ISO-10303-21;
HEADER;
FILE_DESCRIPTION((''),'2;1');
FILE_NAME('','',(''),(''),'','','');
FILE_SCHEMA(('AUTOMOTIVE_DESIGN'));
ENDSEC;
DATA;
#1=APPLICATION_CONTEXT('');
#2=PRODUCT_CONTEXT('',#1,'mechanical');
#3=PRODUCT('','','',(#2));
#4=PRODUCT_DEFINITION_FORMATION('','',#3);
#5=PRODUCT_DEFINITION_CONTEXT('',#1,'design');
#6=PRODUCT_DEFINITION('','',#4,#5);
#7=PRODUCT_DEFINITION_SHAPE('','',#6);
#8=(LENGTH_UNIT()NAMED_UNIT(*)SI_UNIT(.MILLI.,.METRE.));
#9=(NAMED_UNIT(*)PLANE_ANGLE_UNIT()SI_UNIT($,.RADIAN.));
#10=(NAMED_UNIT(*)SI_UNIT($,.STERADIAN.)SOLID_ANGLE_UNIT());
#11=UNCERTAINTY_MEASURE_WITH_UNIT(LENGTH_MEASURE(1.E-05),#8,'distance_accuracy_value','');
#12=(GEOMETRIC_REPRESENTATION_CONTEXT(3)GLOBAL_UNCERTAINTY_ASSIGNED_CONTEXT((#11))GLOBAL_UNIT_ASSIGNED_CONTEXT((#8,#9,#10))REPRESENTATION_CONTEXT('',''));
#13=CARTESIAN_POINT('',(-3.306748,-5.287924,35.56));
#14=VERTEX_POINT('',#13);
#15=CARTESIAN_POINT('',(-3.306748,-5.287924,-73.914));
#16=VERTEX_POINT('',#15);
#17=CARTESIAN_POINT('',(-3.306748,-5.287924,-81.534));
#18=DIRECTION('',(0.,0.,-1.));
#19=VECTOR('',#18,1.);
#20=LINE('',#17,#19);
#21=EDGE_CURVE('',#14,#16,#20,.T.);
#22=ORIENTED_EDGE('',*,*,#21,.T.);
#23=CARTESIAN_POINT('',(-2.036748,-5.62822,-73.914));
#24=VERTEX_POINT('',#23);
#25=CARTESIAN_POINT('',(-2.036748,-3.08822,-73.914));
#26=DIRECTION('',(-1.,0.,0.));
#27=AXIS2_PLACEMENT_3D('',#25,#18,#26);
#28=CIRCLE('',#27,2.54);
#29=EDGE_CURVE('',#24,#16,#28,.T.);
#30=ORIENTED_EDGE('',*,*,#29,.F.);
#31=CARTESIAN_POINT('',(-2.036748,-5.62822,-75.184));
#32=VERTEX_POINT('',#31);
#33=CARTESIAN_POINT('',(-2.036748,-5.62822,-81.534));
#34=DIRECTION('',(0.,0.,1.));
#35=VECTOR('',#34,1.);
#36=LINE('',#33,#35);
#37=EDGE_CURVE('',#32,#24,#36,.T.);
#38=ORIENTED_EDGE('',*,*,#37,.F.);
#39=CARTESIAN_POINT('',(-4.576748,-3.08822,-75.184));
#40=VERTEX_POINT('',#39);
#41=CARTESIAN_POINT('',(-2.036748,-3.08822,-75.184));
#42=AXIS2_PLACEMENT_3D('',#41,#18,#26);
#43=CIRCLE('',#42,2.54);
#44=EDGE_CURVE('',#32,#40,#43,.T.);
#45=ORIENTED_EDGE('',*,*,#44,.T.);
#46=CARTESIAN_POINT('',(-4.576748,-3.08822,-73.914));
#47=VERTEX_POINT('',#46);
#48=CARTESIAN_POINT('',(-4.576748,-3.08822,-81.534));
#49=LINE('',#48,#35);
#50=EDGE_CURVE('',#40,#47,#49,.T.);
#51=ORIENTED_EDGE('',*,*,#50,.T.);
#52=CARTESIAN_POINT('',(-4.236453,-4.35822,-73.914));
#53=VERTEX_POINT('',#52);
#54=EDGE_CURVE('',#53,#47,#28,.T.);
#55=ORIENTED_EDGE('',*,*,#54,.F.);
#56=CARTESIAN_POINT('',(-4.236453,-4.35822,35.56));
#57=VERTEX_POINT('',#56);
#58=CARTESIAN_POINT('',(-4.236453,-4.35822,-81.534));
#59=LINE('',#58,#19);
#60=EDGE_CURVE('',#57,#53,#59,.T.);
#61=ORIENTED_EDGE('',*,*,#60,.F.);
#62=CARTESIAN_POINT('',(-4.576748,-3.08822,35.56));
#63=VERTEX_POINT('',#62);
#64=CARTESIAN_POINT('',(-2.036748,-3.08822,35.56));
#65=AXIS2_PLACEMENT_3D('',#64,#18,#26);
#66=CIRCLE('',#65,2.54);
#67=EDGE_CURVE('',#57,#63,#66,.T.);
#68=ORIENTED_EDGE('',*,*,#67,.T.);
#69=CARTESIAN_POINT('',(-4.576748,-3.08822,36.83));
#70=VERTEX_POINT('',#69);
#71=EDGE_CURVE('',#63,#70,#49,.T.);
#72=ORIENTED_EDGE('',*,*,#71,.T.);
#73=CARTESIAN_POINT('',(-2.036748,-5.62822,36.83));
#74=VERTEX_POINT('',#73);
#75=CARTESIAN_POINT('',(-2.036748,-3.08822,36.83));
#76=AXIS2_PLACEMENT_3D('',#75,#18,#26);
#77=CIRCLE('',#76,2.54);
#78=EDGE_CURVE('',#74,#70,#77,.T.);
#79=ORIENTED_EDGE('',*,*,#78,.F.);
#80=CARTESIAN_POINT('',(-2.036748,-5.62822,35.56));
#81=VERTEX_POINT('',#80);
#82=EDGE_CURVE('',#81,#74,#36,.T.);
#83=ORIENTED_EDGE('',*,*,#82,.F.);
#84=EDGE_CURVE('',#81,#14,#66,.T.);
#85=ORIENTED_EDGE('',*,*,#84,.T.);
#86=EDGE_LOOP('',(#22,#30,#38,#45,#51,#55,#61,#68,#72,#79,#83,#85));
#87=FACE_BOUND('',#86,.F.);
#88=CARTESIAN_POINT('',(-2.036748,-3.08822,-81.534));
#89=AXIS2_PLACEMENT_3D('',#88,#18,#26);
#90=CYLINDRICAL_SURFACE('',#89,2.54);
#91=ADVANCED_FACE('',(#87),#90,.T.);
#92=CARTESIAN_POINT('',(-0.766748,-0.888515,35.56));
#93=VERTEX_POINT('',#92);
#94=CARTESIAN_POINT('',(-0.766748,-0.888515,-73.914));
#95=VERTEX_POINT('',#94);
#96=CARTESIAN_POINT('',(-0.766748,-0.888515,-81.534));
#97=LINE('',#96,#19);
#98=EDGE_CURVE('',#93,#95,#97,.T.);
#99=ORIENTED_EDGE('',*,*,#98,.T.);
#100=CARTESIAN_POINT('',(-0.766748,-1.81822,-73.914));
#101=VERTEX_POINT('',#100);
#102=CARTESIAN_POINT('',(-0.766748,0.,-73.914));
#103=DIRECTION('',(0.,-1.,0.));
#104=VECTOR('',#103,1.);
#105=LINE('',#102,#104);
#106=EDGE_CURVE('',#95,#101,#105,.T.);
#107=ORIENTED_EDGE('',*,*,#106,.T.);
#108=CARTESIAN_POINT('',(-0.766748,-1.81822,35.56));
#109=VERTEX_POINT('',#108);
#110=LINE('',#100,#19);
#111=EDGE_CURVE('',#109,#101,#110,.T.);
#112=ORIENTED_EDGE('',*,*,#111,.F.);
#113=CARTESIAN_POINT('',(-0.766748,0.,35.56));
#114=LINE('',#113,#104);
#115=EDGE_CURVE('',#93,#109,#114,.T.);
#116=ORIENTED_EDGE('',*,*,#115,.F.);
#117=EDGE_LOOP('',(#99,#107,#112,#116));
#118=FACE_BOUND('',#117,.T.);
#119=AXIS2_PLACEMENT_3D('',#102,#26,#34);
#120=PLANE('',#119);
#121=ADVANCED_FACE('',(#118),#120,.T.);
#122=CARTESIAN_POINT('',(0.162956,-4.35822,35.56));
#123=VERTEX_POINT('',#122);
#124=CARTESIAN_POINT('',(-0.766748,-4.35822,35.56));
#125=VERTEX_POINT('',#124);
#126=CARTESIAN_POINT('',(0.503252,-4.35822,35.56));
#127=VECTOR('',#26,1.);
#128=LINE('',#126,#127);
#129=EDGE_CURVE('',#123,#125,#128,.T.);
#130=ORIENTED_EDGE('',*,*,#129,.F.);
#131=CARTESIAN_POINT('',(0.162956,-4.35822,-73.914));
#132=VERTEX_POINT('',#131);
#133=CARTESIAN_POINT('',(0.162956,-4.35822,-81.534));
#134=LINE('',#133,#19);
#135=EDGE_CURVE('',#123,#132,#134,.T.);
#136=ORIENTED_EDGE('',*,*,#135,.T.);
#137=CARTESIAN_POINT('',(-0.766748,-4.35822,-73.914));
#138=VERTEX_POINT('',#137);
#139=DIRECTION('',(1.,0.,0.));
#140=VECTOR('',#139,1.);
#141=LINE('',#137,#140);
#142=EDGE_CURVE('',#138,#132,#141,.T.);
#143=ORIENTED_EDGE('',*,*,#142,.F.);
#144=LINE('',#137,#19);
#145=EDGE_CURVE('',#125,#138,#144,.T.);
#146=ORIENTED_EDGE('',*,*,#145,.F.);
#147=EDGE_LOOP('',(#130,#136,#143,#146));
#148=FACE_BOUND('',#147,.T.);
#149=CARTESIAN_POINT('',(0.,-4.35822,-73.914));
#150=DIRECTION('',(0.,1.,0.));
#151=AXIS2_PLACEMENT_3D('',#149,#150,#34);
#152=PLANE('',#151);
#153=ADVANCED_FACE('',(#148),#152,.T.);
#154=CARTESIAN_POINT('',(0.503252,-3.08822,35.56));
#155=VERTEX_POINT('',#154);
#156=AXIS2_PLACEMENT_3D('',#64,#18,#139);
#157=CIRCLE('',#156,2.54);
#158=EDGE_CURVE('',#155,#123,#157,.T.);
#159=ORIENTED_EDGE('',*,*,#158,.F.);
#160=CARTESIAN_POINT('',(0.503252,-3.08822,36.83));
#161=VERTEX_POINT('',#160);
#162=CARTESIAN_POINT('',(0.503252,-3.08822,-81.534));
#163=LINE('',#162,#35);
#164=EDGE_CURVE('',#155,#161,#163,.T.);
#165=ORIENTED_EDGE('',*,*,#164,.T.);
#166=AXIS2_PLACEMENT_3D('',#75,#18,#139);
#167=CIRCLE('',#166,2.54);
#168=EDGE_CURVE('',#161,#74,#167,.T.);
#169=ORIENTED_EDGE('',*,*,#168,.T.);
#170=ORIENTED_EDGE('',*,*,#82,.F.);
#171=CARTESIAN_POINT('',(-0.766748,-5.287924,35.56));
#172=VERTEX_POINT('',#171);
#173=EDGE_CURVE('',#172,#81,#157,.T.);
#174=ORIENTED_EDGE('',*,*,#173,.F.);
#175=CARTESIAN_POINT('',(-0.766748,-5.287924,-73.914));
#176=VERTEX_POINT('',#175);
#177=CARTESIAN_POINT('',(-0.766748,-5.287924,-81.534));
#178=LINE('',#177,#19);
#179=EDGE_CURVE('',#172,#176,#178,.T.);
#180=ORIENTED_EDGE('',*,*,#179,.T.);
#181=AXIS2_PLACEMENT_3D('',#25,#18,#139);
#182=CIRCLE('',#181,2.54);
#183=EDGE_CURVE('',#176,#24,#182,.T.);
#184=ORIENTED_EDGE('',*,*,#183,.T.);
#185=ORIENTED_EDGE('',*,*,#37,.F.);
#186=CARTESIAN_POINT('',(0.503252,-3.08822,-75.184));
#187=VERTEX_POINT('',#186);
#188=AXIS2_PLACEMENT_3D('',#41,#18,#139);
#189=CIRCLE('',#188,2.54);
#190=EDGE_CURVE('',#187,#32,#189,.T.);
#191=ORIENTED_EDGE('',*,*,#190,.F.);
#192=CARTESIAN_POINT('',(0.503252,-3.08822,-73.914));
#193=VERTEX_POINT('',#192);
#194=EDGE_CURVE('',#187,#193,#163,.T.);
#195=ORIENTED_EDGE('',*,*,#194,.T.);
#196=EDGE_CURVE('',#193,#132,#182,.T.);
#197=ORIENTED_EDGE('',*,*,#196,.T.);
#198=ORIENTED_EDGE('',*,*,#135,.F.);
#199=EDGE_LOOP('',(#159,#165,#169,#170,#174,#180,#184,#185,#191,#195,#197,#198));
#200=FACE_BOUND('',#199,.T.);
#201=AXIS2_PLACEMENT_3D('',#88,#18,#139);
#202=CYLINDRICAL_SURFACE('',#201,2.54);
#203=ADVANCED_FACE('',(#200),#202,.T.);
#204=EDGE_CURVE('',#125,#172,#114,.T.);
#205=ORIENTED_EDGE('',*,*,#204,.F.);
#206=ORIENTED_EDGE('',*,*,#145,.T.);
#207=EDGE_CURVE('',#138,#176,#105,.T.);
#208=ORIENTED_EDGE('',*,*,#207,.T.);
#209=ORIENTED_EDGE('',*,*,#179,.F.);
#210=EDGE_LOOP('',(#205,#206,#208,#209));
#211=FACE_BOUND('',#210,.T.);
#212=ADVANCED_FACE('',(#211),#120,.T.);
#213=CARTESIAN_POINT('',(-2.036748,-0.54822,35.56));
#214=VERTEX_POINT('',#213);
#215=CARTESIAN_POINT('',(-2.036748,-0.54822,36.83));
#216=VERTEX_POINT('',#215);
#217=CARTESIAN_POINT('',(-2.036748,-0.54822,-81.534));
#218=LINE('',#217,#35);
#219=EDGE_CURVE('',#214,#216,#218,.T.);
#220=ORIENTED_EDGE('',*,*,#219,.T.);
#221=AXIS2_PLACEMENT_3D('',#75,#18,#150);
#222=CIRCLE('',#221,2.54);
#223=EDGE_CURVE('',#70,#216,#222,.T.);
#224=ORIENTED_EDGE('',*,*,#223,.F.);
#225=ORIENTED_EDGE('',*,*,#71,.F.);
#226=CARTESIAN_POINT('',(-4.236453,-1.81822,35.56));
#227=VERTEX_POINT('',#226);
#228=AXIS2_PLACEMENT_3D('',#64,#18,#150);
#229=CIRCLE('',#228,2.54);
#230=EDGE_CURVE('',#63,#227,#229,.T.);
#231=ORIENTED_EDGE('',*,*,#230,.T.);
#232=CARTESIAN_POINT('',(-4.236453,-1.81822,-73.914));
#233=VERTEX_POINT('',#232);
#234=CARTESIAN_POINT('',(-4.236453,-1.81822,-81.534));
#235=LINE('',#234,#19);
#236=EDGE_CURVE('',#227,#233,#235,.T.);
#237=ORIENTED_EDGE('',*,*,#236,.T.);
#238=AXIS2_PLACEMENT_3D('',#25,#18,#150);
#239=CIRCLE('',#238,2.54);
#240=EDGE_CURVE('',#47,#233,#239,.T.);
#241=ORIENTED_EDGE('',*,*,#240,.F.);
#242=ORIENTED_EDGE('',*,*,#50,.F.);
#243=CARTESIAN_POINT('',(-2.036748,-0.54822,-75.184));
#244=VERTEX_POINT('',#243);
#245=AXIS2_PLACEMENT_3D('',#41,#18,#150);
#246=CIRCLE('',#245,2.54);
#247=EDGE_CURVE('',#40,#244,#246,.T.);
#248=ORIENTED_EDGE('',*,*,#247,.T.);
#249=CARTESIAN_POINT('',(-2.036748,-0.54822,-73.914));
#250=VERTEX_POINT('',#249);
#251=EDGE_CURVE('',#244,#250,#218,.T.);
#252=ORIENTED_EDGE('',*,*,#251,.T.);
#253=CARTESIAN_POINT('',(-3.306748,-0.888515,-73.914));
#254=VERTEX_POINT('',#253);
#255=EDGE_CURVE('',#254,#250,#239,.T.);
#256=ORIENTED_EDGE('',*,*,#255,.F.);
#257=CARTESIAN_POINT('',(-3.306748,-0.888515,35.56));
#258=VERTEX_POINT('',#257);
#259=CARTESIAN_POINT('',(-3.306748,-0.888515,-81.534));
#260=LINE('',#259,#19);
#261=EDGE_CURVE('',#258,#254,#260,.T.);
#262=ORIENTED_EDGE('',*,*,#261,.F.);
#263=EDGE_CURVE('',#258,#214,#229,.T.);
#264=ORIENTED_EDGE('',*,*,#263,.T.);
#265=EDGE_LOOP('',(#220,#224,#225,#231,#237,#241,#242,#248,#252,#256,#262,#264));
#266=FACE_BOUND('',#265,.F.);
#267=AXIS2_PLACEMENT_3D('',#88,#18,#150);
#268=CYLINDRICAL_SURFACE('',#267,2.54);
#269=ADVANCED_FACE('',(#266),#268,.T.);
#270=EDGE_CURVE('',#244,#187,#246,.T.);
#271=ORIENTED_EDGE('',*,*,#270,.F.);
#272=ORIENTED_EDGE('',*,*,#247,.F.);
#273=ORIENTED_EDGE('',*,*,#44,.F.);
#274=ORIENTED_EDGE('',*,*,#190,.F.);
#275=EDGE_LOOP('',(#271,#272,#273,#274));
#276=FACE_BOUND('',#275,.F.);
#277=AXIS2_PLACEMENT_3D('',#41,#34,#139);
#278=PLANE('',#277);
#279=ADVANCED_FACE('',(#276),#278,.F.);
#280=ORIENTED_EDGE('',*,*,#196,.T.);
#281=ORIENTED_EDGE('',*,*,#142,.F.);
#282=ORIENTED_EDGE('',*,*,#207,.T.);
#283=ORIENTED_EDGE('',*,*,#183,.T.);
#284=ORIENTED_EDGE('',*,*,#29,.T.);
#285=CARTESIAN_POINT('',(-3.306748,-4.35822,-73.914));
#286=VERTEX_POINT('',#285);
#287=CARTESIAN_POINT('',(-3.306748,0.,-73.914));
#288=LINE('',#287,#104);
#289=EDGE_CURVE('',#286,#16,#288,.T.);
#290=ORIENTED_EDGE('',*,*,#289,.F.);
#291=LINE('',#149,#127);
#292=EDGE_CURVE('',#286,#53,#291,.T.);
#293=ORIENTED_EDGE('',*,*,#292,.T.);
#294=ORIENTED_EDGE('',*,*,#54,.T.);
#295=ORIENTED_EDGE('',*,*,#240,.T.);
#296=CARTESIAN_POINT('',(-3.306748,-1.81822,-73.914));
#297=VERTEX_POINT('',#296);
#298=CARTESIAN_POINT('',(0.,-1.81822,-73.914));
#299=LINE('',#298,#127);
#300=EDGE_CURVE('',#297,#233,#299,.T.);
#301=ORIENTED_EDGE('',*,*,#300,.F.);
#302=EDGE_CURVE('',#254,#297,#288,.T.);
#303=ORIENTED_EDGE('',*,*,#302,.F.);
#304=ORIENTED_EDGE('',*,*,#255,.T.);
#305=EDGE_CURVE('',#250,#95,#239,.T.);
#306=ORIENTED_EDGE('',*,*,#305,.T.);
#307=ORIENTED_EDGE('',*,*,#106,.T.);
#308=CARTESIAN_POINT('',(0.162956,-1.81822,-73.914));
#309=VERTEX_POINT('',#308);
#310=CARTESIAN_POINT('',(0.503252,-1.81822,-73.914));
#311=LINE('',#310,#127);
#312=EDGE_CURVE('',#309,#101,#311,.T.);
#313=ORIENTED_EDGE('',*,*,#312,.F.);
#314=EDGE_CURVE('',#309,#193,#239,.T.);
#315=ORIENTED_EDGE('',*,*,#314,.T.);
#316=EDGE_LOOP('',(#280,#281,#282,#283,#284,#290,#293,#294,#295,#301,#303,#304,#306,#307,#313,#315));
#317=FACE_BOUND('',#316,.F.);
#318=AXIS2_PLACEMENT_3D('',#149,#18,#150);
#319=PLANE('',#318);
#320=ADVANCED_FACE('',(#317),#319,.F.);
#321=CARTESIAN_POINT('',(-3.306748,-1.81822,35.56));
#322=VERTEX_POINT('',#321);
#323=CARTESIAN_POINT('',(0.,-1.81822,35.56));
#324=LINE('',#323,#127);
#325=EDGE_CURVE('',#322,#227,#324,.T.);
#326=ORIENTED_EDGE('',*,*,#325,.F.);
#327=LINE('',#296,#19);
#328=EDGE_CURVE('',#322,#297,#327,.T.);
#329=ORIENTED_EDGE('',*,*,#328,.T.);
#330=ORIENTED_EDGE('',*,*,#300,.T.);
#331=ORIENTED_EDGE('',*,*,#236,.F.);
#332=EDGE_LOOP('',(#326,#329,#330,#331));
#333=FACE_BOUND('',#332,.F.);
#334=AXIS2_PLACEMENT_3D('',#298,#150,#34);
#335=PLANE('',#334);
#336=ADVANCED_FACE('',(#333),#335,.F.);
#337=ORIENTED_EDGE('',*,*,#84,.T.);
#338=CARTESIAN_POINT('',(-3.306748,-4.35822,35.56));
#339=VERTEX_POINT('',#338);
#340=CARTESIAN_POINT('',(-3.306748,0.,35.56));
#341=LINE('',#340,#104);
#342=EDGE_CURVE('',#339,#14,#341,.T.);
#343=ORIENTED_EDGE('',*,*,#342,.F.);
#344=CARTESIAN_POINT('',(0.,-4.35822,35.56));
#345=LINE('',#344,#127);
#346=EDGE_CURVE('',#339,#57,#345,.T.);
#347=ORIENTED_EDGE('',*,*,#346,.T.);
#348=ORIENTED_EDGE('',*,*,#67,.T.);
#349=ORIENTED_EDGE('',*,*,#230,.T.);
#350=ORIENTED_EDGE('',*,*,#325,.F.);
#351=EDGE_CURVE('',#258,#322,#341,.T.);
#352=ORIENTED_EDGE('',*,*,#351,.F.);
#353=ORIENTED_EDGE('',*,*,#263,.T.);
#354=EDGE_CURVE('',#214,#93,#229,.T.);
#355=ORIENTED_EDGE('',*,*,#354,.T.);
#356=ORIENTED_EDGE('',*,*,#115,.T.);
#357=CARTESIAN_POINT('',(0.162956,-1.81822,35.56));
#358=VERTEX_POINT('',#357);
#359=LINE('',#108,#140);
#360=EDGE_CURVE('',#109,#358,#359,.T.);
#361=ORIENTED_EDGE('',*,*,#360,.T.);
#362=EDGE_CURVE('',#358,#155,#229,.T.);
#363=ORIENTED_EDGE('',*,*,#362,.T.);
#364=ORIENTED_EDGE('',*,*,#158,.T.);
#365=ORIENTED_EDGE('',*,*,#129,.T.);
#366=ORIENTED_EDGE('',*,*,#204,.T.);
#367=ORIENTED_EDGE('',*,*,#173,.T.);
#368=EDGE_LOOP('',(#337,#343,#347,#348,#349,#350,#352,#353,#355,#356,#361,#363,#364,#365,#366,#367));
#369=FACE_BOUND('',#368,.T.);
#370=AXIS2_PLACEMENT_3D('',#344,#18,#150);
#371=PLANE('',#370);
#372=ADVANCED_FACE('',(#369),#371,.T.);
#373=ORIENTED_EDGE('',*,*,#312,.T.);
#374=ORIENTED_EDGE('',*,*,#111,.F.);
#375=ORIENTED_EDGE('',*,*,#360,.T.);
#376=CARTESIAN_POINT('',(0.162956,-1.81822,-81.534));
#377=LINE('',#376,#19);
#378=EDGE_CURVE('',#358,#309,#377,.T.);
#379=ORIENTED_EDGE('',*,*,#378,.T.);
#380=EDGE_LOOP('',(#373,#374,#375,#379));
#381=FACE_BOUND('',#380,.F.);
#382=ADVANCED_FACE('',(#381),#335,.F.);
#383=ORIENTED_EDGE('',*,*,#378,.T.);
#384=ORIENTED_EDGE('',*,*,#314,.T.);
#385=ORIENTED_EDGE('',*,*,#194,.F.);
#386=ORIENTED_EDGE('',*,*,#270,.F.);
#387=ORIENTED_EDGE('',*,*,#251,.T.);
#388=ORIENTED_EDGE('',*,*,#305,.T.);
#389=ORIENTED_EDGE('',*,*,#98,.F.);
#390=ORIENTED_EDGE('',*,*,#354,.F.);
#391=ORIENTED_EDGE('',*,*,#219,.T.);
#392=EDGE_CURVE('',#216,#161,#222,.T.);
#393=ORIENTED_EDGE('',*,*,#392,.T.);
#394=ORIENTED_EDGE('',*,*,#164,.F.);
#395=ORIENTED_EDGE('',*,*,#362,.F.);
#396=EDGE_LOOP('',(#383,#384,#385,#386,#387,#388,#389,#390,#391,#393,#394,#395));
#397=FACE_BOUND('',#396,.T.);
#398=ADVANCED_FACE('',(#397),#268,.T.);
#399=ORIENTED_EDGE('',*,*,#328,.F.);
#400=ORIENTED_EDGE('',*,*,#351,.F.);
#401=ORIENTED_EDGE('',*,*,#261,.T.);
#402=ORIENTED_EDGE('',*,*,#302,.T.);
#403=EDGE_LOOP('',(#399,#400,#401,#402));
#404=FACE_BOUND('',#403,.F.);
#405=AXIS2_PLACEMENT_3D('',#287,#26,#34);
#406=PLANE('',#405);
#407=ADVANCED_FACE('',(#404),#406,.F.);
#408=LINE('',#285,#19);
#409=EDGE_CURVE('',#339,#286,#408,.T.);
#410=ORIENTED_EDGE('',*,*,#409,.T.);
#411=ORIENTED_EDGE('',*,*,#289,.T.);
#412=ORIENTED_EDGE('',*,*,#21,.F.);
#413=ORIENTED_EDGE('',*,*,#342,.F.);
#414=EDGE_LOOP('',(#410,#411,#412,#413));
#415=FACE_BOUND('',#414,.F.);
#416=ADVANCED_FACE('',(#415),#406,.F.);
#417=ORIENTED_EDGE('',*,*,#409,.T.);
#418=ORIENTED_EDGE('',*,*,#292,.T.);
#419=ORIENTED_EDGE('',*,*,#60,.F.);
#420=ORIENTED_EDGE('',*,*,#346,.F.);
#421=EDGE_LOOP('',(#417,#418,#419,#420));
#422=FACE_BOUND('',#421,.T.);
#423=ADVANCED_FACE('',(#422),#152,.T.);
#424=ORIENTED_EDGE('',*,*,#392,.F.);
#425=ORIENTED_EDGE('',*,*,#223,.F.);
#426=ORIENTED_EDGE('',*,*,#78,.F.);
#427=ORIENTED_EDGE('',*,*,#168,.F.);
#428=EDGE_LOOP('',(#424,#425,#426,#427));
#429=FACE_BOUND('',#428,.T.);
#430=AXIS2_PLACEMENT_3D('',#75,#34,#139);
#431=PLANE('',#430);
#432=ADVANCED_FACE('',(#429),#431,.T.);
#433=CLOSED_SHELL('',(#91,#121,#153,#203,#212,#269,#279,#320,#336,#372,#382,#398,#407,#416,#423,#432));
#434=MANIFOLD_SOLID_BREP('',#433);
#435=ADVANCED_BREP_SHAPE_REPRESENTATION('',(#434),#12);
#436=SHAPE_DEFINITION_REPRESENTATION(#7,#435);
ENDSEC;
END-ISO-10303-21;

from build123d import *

# Parameters (mm, degrees)
F0_W          = 5.08
F0_H          = 5.08
F1_DEPTH      = 36.83
F1_DEPTH_BACK = 75.184
F2_W          = 2.54
F2_H          = 109.474
F3_DEPTH      = 23.114
F4_W          = 2.54
F4_H          = 109.474
F5_DEPTH      = 4.5777483376
F5_DEPTH_BACK = 29.972
F6_T1_DEPTH   = 124.714


# Not quite as in the source:
# - a fillet or chamfer that OpenCascade refuses, or shapes differently, is made with other operations: its cross-section is extruded or revolved along the edge and cut away or added


with BuildPart() as f1:
    # F0 (on Top) → F1 (new body, two sides)
    with BuildSketch(Plane.XY) as f1_sk:
        with Locations((-2.0367483376, -3.0882195887)):
            Rectangle(F0_W, F0_H)
    extrude(amount=F1_DEPTH)
    extrude(f1_sk.sketch, amount=-F1_DEPTH_BACK)

    # F2 (on Front) → F3 (cut)
    with BuildSketch(Plane.XZ):
        with Locations((-2.0367483376, -19.177)):
            Rectangle(F2_W, F2_H)
    extrude(amount=F3_DEPTH, mode=Mode.SUBTRACT)

    # F4 (on Right) → F5 (cut, two sides)
    with BuildSketch(Plane.YZ) as f5_sk:
        with Locations((-3.0882195887, -19.177)):
            Rectangle(F4_W, F4_H)
    extrude(amount=-F5_DEPTH, mode=Mode.SUBTRACT)
    extrude(f5_sk.sketch, amount=F5_DEPTH_BACK, mode=Mode.SUBTRACT)

    # F6: fillet of radius 2.54 on 4 edges, made by hand

    # F6_s2 → F6_t1 (cut)
    with BuildSketch(Plane.XY.offset(-81.534)):
        with BuildLine():
            ThreePointArc((0.5032516624, -3.0882195887), (-0.2406971133, -4.8842708129), (-2.0367483376, -5.6282195887))
            Line((-2.0367483376, -5.6282195887), (0.5032516624, -5.6282195887))
            Line((0.5032516624, -5.6282195887), (0.5032516624, -3.0882195887))
        make_face()
        with BuildLine():
            ThreePointArc((-4.5767483376, -3.0882195887), (-3.8327995618, -4.8842708129), (-2.0367483376, -5.6282195887))
            Line((-2.0367483376, -5.6282195887), (-4.5767483376, -5.6282195887))
            Line((-4.5767483376, -5.6282195887), (-4.5767483376, -3.0882195887))
        make_face()
        with BuildLine():
            ThreePointArc((-2.0367483376, -0.5482195887), (-3.8327995618, -1.2921683645), (-4.5767483376, -3.0882195887))
            Line((-4.5767483376, -3.0882195887), (-4.5767483376, -0.5482195887))
            Line((-4.5767483376, -0.5482195887), (-2.0367483376, -0.5482195887))
        make_face()
        with BuildLine():
            ThreePointArc((-2.0367483376, -0.5482195887), (-0.2406971133, -1.2921683645), (0.5032516624, -3.0882195887))
            Line((0.5032516624, -3.0882195887), (0.5032516624, -0.5482195887))
            Line((0.5032516624, -0.5482195887), (-2.0367483376, -0.5482195887))
        make_face()
    extrude(amount=F6_T1_DEPTH, mode=Mode.SUBTRACT)


solid = f1.part
